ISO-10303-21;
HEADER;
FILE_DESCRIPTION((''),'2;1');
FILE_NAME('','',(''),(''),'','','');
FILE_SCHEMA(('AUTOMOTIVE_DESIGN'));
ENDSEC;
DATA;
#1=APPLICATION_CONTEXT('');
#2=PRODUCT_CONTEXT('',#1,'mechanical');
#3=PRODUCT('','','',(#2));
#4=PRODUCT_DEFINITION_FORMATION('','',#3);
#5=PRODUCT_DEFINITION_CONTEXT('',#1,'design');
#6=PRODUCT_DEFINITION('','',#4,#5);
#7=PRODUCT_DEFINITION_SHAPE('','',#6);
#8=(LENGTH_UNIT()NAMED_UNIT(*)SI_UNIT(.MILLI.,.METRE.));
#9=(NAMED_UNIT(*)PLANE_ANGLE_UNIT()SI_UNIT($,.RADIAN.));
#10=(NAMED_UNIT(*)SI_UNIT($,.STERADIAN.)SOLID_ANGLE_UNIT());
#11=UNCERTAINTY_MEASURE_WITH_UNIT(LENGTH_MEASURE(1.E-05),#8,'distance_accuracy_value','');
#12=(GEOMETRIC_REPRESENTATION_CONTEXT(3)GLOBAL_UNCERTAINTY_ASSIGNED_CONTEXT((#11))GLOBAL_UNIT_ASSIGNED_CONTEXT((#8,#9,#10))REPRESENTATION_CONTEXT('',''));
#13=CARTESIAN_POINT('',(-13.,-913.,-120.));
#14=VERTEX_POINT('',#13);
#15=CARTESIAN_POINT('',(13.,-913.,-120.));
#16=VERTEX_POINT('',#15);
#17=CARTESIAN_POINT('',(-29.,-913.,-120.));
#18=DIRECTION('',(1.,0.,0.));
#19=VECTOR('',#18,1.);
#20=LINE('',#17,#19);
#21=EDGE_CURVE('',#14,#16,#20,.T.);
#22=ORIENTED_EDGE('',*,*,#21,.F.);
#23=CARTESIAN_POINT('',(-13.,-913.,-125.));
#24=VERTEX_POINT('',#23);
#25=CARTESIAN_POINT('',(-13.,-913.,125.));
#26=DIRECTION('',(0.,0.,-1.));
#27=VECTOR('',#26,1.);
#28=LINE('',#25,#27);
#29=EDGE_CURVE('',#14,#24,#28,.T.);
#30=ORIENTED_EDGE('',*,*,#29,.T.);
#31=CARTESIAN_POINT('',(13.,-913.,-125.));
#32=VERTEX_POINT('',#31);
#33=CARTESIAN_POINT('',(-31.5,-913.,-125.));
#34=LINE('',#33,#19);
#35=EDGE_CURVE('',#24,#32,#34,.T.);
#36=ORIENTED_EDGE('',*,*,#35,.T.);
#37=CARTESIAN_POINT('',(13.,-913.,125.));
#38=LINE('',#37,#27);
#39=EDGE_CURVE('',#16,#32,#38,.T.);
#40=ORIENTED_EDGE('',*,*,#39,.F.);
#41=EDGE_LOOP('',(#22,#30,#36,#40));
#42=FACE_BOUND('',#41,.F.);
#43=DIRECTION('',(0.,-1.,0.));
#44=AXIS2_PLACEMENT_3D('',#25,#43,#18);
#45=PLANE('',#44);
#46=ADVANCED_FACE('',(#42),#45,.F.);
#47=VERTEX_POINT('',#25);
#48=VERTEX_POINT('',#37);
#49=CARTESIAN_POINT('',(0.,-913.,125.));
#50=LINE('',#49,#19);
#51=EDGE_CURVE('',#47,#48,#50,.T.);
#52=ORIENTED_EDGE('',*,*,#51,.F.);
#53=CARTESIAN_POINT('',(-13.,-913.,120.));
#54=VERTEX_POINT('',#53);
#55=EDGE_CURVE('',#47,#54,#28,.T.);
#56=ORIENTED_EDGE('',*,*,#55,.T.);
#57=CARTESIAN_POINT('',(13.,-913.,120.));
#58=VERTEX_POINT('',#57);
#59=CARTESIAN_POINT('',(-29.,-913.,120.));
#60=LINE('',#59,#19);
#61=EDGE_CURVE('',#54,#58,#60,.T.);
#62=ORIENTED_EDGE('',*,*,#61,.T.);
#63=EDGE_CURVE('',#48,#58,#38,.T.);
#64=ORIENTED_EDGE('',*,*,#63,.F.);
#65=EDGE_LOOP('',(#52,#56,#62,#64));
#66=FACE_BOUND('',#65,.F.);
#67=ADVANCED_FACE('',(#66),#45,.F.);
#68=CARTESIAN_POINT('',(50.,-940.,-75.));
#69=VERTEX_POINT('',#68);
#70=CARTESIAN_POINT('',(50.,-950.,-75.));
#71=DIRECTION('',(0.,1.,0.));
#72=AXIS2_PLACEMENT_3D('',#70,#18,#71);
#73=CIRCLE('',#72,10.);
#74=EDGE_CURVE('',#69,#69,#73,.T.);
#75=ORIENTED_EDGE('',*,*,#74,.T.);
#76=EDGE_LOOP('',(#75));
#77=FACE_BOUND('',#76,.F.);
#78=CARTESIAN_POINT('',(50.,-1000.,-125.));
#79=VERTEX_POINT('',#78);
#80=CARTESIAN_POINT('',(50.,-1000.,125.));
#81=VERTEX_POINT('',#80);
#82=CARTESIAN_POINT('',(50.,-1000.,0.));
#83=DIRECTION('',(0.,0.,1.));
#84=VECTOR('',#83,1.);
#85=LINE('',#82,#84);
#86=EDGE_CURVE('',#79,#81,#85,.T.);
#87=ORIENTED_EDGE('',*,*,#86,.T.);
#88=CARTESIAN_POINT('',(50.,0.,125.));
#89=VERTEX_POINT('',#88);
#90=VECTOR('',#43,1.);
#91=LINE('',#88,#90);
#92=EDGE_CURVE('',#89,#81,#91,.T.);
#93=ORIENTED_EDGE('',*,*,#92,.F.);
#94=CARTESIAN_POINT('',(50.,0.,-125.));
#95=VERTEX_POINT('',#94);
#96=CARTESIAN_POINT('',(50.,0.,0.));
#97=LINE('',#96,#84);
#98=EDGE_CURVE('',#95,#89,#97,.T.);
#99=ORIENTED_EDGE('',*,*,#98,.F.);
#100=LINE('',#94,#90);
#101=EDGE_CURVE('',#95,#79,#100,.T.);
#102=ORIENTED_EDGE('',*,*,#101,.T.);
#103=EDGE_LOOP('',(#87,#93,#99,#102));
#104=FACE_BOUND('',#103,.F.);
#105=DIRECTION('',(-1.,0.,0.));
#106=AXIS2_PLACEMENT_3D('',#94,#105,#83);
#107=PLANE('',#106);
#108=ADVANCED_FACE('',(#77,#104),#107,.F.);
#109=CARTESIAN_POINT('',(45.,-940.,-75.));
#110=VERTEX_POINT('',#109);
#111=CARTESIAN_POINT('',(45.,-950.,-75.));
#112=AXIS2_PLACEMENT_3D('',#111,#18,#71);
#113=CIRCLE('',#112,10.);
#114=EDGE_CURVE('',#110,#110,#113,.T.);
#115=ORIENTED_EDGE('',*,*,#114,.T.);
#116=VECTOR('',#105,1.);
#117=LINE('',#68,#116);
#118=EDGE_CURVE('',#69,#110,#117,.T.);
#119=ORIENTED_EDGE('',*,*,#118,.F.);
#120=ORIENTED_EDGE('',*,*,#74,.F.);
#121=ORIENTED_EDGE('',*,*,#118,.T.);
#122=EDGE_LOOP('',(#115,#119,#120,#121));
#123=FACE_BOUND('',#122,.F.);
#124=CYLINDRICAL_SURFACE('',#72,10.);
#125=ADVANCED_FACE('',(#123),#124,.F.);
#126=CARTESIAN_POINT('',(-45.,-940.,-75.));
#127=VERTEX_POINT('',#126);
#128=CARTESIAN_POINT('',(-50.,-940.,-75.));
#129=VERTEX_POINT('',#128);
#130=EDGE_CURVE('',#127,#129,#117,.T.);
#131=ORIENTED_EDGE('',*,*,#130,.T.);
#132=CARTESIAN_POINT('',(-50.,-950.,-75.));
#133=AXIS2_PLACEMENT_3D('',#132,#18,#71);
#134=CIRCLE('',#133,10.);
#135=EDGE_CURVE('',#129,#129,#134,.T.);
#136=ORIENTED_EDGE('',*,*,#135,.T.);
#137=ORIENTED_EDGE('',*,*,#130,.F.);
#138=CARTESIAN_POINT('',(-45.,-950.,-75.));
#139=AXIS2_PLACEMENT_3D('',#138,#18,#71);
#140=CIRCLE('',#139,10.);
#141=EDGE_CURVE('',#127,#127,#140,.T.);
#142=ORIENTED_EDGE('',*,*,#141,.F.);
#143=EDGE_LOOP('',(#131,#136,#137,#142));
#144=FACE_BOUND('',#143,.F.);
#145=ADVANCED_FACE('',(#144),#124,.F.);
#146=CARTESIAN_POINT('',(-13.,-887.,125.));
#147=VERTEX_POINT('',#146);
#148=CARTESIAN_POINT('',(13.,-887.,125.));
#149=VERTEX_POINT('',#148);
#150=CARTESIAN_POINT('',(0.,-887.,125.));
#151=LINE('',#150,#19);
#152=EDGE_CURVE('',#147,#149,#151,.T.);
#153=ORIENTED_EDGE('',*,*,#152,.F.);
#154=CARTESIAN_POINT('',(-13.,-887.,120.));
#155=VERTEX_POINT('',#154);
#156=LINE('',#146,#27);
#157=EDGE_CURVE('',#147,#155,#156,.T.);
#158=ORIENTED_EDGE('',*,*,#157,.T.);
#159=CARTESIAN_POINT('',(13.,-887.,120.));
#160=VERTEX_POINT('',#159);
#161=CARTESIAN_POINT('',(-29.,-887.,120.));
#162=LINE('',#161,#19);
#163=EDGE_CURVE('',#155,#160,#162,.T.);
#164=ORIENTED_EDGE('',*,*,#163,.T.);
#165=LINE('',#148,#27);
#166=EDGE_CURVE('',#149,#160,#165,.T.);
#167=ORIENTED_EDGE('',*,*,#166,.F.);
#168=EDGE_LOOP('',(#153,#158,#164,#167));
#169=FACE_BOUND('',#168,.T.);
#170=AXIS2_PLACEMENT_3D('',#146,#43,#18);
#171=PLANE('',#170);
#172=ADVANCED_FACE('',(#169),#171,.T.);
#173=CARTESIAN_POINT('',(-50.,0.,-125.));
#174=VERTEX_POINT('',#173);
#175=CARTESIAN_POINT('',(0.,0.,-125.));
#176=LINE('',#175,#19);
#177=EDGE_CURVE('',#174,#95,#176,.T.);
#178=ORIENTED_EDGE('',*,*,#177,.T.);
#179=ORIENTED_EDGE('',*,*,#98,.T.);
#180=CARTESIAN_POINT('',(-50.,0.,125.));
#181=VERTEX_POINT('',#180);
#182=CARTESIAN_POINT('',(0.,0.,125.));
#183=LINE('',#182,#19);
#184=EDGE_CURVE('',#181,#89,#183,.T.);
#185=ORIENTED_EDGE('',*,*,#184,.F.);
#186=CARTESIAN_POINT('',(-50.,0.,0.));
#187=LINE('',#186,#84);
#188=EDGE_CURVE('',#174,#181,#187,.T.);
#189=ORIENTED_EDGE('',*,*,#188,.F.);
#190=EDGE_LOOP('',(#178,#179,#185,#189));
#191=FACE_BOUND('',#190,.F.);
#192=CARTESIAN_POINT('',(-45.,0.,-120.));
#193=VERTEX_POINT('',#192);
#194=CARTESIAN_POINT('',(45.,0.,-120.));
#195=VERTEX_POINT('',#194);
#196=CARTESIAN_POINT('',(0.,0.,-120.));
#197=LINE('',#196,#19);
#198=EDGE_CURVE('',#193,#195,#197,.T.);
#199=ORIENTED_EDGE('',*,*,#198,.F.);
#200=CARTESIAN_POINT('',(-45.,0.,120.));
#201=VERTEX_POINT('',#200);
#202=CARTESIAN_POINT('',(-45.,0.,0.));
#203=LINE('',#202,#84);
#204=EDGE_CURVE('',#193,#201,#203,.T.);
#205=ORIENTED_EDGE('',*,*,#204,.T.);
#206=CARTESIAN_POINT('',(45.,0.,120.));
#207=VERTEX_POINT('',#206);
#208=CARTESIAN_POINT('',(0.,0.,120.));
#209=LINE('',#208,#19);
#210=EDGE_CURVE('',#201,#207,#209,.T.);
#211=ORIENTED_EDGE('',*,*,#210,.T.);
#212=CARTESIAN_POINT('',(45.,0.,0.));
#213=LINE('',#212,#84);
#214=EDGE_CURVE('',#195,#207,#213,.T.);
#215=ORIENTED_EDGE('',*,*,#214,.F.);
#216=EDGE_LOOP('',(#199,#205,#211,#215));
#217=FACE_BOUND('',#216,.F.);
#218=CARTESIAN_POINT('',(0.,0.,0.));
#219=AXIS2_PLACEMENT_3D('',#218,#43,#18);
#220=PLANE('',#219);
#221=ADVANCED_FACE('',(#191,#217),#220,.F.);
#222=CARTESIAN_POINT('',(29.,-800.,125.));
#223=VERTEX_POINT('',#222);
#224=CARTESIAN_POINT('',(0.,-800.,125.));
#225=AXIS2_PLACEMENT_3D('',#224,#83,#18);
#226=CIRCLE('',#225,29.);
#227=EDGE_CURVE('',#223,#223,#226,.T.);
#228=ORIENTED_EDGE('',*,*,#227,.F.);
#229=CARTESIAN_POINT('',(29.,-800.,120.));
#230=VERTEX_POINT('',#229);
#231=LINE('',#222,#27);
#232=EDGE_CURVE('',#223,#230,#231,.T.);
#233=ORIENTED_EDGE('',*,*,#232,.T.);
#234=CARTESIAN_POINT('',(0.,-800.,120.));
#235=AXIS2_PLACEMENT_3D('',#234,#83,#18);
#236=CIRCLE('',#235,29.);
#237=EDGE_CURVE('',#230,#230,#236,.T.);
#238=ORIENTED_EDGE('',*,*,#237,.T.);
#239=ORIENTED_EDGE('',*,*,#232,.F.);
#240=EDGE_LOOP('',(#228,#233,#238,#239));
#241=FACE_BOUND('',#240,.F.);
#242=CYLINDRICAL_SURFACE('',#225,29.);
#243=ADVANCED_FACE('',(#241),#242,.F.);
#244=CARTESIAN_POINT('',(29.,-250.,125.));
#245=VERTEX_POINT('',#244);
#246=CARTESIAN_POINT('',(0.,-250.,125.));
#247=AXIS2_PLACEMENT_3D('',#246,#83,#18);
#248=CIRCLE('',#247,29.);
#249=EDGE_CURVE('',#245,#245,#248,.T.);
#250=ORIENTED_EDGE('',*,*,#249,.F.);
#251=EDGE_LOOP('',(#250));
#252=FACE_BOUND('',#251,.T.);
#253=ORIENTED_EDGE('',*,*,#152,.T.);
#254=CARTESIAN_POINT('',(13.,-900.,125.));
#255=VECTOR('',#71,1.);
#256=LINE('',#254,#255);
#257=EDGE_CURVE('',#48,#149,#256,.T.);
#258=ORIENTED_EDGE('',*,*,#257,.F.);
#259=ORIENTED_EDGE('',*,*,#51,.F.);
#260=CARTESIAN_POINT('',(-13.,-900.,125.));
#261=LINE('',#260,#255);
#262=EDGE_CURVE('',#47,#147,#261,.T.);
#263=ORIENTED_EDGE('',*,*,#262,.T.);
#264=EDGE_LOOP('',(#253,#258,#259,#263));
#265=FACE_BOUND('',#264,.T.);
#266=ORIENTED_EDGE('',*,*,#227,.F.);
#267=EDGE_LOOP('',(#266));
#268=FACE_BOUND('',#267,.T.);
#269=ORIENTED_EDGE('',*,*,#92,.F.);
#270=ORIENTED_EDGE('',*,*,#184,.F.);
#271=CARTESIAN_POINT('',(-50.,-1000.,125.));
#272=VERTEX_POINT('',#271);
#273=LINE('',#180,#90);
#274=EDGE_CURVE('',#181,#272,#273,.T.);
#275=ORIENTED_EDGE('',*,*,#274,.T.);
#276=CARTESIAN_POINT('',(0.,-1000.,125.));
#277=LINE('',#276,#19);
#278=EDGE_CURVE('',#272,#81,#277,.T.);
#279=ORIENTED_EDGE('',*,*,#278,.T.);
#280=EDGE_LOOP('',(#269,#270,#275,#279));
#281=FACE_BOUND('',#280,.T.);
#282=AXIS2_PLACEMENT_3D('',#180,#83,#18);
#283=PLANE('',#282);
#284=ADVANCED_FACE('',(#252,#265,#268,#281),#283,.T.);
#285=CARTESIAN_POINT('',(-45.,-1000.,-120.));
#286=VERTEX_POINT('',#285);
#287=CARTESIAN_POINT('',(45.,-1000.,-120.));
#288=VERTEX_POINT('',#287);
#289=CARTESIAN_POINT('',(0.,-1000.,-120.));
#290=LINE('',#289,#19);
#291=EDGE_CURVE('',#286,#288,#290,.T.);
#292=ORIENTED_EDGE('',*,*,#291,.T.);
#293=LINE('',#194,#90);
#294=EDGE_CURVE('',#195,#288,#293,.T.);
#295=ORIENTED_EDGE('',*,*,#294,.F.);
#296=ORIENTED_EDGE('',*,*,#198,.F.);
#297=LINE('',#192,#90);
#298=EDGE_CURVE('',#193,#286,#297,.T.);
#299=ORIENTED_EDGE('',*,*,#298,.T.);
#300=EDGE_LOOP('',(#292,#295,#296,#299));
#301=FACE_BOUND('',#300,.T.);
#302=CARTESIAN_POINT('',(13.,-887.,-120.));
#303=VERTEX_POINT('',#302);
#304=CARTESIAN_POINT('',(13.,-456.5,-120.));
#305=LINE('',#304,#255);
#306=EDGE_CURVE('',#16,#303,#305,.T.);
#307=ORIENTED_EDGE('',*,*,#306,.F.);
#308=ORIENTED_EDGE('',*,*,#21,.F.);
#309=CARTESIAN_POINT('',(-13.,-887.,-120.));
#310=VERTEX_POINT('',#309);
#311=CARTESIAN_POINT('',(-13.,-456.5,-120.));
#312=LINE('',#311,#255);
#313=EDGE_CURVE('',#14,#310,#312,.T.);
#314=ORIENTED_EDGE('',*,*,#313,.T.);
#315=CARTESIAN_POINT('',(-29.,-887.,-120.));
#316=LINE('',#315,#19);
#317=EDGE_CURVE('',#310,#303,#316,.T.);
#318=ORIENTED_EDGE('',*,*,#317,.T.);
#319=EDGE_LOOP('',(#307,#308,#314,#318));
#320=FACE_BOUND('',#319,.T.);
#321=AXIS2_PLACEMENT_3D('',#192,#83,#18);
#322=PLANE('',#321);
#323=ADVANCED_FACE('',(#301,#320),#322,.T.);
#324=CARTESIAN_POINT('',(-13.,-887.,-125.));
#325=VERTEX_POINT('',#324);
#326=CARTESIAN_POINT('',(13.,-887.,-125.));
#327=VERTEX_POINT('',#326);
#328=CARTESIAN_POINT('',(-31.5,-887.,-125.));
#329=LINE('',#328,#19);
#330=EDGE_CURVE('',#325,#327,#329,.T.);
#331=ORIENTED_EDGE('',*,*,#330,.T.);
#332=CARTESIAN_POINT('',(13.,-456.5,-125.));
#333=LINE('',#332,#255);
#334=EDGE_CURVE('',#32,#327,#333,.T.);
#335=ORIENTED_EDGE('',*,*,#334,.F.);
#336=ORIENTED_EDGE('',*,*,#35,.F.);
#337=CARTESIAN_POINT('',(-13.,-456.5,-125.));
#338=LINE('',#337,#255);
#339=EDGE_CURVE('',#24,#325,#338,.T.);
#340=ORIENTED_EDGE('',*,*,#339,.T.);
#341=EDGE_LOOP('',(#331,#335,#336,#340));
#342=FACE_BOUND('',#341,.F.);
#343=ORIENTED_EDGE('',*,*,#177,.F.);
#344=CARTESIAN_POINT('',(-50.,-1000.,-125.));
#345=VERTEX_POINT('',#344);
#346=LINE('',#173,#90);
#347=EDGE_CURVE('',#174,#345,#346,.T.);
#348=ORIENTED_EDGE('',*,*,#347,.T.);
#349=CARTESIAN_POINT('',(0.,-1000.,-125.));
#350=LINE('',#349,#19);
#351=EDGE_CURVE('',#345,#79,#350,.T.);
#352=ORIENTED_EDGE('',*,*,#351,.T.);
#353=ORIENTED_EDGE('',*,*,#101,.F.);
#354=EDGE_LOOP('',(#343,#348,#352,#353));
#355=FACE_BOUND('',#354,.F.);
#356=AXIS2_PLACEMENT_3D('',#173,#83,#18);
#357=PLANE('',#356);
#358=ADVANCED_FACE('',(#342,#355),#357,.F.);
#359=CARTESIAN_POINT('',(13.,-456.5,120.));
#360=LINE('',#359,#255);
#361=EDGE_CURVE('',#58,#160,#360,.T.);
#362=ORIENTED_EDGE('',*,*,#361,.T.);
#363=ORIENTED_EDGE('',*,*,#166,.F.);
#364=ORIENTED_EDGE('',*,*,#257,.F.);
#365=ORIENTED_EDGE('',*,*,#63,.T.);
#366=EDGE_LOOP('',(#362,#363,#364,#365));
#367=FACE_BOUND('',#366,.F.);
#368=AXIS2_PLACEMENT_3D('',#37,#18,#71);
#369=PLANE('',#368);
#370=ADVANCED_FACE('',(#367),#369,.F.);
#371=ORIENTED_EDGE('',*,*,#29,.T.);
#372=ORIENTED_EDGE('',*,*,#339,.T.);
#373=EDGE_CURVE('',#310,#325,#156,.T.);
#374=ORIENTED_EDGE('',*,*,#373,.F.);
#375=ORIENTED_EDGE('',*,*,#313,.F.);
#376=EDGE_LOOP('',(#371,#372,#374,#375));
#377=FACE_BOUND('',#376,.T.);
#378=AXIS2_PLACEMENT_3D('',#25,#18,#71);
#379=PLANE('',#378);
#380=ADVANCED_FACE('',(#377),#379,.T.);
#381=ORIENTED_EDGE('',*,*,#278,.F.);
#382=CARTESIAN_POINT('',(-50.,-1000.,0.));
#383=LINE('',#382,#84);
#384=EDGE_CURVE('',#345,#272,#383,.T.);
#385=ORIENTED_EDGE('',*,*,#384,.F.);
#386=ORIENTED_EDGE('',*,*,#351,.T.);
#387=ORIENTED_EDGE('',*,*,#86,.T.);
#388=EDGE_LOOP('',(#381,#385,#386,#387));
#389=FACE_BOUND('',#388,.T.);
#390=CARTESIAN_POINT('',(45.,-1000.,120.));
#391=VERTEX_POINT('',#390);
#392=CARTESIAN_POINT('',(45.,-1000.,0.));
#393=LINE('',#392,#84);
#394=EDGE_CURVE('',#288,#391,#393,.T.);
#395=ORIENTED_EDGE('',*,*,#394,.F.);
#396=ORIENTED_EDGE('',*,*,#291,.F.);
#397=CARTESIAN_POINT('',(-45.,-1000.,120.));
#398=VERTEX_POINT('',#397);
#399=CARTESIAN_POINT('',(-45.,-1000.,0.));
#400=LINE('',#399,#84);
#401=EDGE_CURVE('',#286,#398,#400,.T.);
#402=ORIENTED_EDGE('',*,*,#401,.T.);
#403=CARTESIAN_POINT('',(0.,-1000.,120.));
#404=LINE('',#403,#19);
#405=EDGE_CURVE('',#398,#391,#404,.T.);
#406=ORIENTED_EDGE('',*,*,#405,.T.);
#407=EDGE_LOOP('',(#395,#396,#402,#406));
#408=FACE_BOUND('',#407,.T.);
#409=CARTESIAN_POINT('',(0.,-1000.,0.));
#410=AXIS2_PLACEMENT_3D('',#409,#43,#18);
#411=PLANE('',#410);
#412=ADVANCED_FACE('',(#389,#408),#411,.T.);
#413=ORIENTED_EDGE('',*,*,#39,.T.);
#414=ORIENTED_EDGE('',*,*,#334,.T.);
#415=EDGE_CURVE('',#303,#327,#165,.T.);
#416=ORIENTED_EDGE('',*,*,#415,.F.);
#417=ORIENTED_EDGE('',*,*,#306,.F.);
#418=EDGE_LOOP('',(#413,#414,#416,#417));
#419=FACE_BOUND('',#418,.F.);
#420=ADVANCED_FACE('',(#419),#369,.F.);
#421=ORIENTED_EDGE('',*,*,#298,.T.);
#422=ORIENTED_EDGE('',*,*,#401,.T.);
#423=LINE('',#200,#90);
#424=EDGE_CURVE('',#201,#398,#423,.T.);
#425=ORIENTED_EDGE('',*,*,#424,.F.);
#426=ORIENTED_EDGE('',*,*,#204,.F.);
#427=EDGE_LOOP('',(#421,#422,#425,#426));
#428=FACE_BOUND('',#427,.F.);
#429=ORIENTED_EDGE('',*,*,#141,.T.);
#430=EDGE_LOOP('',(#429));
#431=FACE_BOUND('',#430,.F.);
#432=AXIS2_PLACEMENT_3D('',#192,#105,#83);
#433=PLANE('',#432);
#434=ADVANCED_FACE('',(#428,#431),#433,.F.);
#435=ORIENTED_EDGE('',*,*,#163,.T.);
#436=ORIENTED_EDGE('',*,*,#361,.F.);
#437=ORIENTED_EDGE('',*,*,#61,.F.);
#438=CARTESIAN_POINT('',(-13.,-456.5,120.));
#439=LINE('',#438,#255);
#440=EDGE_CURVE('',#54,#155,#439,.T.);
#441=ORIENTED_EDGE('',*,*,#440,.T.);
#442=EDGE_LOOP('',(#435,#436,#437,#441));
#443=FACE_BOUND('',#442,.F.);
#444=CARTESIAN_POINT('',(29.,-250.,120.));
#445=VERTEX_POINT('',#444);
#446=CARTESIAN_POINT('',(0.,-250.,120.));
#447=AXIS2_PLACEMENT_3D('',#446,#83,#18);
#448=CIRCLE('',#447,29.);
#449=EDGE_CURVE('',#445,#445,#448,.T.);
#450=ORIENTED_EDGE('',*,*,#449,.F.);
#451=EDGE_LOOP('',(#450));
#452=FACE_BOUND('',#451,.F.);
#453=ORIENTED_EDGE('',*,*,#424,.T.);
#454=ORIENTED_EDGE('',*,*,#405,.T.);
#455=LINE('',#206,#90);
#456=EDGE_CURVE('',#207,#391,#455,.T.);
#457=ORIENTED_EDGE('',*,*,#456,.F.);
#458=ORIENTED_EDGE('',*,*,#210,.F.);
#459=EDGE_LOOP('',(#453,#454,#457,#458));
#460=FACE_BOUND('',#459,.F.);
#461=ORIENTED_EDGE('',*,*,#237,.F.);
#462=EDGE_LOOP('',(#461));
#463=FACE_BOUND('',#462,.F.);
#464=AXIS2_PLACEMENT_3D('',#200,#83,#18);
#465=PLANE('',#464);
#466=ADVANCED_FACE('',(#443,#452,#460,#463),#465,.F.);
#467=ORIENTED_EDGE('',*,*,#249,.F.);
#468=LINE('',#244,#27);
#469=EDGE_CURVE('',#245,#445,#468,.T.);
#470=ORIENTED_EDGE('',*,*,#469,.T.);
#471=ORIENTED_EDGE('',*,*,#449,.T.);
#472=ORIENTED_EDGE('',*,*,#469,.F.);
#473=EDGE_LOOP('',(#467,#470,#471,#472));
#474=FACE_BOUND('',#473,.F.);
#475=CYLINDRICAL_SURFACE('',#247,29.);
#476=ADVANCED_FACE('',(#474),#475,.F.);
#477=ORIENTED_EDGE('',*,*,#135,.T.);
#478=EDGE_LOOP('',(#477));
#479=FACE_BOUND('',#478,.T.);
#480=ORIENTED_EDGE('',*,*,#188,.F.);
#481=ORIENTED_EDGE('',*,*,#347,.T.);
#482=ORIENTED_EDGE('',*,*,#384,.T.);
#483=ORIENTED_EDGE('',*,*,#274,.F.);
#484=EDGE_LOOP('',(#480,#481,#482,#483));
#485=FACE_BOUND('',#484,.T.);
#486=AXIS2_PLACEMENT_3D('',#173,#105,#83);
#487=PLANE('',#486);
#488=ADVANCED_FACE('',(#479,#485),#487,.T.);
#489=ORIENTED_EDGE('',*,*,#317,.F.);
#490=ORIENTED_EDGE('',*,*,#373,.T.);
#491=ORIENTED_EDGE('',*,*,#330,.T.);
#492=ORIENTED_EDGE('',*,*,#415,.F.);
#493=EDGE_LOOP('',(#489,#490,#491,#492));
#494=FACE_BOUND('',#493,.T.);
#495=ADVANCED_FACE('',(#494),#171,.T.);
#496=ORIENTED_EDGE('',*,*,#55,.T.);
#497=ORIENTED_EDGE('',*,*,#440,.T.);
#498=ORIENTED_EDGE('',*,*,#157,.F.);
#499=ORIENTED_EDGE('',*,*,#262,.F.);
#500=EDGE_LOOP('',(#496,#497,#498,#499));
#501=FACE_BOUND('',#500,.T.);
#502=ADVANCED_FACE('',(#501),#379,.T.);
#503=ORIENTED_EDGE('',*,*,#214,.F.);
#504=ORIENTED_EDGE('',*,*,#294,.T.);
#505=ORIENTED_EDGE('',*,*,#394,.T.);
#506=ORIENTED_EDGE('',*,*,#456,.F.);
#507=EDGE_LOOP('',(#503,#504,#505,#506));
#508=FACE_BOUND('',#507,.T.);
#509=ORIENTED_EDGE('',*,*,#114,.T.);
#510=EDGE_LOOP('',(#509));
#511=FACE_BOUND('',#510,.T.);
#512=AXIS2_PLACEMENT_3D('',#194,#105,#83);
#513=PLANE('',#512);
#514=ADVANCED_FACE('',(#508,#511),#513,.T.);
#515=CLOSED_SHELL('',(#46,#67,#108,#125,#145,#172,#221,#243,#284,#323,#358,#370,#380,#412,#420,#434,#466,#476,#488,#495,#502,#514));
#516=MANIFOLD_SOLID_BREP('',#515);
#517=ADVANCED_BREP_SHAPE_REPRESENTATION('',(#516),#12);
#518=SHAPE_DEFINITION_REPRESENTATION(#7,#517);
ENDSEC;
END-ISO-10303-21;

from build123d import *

# Parameters (mm, degrees)
F0_W     = 100
F0_H     = 250
F0_W_2   = 90
F0_H_2   = 240
F1_DEPTH = 1000
F2_R     = 10
F3_DEPTH = 100.001
F4_R     = 29
F5_R     = 29
F6_DEPTH = 5
F7_W     = 26
F7_H     = 26
F8_DEPTH = 250.001


# Not quite as in the source:
# - a feature names something its author has since deleted; it is built from what else it names


with BuildPart() as f1:
    # F0 (on Front) → F1 (new body)
    with BuildSketch(Plane.XZ):
        Rectangle(F0_W, F0_H)
        Rectangle(F0_W_2, F0_H_2, mode=Mode.SUBTRACT)
    extrude(amount=F1_DEPTH)

    # F2 (on face) → F3 (cut, through all)
    with BuildSketch(Plane.YZ.offset(50)):
        with Locations((-950, -75)):
            Circle(F2_R)
    extrude(amount=-F3_DEPTH, mode=Mode.SUBTRACT)

    # F4 (on face) + F5 (on face) → F6 (cut, through all)
    with BuildSketch(Plane.XY.offset(125)):
        with Locations((0, -800)):
            Circle(F4_R)
    with BuildSketch(Plane.XY.offset(125)):
        with Locations((0, -250)):
            Circle(F5_R)
    extrude(amount=-F6_DEPTH, mode=Mode.SUBTRACT)

    # F7 (on face) → F8 (cut, through all)
    with BuildSketch(Plane.XY.offset(125)):
        with Locations((0, -900)):
            Rectangle(F7_W, F7_H)
    extrude(amount=-F8_DEPTH, mode=Mode.SUBTRACT)


solid = f1.part
